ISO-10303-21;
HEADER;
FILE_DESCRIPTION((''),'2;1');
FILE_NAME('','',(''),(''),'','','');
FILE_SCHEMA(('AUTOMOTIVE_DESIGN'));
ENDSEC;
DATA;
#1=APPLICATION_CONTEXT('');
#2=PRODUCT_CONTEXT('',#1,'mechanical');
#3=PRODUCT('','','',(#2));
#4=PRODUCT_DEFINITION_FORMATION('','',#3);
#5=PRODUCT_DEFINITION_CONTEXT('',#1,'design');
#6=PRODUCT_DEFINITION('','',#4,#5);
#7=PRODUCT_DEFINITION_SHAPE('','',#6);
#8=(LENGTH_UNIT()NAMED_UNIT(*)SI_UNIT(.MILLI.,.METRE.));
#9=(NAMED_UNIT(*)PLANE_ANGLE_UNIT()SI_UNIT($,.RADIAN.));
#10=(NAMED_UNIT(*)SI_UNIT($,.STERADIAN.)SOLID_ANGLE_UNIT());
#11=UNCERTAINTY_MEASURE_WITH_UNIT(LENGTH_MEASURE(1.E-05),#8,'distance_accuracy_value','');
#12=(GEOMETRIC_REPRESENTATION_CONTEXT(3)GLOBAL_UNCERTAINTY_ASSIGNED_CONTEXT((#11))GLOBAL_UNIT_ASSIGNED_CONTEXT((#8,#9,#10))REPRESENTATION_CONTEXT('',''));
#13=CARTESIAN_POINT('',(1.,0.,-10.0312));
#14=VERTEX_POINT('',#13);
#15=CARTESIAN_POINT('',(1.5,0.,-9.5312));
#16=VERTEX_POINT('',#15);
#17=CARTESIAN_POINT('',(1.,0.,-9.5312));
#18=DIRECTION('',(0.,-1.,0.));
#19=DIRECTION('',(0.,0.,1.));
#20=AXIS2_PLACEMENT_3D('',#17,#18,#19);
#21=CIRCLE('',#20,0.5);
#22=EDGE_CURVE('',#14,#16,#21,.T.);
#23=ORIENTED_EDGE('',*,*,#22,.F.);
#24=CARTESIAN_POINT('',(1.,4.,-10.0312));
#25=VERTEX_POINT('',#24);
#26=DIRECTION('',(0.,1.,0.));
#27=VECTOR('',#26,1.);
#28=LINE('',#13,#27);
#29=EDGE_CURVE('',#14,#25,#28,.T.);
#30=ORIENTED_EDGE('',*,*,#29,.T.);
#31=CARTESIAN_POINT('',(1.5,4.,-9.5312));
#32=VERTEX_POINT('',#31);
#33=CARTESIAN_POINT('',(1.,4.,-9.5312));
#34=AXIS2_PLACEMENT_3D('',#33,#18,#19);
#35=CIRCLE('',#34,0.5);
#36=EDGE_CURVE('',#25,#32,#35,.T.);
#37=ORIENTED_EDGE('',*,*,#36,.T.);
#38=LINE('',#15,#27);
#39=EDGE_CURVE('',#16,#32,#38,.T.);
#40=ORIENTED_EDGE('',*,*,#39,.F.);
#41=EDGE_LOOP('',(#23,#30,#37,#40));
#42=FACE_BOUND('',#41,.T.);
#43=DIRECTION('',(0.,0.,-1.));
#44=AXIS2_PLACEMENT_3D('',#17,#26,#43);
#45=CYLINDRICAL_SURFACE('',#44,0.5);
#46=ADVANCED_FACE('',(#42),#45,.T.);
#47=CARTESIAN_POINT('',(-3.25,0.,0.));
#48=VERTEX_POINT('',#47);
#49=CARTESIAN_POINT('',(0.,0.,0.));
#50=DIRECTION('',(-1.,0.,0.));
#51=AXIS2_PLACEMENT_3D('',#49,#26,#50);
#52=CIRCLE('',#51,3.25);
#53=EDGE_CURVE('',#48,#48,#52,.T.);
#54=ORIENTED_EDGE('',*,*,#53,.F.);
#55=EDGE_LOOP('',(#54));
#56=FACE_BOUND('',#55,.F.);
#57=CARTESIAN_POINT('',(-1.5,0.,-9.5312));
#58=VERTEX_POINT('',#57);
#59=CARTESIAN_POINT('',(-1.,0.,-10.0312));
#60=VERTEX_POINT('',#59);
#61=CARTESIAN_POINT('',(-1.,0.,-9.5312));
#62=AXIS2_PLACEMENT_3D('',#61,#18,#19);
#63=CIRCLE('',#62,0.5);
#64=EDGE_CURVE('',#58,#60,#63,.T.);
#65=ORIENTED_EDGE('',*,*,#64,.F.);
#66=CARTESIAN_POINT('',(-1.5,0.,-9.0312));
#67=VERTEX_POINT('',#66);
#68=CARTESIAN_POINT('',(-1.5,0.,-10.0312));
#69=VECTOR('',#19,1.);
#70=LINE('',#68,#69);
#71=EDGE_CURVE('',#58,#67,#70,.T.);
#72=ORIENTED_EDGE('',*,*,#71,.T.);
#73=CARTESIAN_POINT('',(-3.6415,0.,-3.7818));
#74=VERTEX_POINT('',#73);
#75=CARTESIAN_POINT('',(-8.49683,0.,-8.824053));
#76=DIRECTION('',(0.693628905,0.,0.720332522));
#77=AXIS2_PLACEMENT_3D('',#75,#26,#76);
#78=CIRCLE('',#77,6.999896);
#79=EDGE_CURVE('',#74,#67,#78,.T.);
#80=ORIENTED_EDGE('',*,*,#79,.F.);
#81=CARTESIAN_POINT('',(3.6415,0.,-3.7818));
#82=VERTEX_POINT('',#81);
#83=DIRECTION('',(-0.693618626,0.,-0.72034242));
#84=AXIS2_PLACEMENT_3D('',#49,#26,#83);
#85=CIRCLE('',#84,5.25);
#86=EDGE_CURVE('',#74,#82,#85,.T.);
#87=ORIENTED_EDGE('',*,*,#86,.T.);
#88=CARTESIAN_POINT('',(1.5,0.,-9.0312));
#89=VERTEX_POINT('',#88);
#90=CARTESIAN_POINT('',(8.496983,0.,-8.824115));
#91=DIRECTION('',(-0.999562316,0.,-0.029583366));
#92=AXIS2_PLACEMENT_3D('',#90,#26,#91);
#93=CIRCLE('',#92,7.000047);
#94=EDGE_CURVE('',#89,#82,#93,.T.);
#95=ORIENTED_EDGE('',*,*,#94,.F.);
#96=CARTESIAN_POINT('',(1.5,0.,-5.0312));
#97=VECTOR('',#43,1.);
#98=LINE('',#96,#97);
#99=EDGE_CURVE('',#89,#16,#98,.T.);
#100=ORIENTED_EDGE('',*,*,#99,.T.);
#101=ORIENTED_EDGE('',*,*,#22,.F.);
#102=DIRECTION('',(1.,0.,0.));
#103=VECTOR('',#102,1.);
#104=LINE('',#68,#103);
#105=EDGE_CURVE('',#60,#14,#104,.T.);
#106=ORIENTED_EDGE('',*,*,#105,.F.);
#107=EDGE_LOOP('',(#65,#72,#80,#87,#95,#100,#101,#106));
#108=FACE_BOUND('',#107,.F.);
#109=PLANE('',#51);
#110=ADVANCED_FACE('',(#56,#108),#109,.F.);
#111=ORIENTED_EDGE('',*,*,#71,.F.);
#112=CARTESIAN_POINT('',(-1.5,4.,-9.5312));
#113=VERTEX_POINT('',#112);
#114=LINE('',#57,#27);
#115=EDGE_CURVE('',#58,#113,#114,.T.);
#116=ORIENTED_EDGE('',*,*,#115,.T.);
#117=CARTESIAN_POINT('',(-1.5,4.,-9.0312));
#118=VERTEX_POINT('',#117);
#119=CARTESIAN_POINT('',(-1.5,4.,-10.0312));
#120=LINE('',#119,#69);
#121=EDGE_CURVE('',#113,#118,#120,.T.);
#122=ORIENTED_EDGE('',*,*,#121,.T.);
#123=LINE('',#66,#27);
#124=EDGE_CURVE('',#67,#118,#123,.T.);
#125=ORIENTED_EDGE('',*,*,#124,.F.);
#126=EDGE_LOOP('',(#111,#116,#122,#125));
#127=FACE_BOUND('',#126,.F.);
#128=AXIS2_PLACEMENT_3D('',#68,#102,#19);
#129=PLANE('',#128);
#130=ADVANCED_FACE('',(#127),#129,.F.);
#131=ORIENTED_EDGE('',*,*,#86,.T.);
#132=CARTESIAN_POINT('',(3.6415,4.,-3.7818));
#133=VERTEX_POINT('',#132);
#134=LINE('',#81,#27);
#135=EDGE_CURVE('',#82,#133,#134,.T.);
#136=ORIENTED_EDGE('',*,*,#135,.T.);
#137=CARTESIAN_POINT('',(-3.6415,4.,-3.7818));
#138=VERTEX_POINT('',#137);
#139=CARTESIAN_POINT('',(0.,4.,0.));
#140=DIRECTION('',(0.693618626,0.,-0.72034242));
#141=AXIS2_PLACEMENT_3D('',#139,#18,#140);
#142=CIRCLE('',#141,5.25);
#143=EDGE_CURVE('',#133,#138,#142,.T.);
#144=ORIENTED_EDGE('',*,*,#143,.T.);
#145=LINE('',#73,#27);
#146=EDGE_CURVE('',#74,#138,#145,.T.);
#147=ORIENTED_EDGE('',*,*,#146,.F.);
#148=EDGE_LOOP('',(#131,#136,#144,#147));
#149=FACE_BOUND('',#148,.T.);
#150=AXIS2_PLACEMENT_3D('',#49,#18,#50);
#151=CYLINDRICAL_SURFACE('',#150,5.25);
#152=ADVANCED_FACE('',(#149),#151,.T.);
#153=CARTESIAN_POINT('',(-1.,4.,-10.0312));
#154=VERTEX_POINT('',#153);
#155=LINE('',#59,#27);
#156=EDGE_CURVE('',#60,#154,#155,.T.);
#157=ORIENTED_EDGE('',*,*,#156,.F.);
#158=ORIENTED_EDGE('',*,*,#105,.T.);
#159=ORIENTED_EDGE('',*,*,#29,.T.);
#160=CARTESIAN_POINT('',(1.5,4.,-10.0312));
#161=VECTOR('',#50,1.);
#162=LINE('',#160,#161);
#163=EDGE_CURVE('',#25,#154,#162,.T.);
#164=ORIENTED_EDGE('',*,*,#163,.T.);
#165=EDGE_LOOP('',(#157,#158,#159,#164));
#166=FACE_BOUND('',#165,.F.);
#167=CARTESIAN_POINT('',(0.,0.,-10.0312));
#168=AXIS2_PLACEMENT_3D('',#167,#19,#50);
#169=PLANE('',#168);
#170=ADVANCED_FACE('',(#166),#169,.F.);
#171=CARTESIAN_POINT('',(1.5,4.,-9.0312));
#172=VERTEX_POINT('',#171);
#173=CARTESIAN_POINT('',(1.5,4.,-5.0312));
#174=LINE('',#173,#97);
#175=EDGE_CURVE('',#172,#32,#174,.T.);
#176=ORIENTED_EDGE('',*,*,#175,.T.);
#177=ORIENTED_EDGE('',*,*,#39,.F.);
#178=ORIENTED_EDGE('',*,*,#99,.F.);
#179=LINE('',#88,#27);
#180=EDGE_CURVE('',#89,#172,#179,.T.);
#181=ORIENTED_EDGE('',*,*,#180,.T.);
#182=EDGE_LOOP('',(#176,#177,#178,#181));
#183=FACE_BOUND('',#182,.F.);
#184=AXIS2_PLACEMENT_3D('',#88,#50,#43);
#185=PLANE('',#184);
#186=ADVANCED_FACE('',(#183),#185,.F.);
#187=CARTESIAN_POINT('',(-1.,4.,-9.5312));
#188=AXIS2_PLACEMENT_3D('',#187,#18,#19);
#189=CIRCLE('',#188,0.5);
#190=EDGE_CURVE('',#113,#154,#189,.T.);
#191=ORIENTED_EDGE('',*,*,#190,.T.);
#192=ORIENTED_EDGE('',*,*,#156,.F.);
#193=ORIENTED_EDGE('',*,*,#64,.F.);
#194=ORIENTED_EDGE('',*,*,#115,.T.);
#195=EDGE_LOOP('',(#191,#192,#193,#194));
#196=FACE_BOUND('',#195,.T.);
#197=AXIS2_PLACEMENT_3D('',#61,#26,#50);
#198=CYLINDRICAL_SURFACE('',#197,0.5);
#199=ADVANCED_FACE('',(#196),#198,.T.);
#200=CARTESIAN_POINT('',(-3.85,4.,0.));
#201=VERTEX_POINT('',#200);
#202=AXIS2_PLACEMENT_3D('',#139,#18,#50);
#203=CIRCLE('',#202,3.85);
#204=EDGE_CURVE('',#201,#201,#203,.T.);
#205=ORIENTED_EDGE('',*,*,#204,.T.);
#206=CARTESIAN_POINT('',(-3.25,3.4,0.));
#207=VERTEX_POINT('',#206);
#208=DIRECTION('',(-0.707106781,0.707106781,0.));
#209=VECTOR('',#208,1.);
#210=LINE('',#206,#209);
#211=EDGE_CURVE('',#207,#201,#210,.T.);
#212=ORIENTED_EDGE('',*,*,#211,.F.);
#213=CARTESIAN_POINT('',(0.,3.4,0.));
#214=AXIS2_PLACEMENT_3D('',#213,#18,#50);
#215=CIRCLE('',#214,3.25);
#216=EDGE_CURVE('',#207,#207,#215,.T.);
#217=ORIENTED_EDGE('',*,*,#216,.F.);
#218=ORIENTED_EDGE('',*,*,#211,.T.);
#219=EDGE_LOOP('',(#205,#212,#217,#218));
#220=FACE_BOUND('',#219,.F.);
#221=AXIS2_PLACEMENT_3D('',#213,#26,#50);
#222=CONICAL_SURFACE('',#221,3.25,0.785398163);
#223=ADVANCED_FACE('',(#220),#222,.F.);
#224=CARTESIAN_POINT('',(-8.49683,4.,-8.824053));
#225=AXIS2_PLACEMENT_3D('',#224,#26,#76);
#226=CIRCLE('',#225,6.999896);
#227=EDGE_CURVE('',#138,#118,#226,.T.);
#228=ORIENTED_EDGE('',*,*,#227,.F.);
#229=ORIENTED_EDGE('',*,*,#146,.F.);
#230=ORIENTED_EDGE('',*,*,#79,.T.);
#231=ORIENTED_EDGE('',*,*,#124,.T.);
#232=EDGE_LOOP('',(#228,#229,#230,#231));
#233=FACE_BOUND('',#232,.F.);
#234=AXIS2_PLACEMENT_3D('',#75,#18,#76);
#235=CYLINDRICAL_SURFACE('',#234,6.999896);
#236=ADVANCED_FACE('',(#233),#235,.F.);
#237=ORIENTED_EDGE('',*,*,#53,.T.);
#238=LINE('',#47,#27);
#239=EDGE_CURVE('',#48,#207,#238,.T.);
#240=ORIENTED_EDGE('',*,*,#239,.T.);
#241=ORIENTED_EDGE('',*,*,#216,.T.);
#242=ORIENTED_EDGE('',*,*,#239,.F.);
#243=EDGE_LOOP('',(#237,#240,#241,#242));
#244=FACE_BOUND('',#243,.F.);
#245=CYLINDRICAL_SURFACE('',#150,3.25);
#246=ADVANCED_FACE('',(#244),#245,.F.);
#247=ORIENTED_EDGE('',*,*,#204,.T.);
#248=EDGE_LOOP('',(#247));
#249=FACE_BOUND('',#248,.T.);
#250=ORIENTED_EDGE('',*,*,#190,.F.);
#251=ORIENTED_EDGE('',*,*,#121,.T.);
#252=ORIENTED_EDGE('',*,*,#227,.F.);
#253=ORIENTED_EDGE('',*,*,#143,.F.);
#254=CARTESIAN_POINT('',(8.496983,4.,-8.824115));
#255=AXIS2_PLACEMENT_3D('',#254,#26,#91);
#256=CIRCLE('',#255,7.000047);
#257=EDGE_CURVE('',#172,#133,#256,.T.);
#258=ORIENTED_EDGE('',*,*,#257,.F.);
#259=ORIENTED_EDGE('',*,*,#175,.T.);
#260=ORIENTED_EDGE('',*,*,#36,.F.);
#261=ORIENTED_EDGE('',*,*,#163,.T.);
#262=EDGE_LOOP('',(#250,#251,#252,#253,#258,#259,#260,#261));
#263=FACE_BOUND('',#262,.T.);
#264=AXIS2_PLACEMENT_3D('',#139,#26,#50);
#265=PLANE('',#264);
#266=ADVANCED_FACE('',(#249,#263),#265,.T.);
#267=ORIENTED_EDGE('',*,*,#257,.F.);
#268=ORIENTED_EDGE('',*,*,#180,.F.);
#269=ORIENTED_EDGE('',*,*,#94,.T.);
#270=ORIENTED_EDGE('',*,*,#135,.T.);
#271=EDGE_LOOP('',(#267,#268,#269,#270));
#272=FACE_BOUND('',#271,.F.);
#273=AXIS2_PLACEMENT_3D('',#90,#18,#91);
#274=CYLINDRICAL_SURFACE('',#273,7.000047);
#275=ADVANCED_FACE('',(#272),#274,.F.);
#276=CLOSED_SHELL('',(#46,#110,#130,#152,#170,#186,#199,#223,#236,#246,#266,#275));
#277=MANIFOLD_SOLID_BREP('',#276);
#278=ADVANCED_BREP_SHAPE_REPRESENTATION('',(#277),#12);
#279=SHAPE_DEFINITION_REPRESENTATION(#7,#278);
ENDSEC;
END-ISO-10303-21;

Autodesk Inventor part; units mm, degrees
ref_plane "YZ Plane" through (0, 0, 0) normal (1, 0, 0) x (0, 1, 0)
ref_plane "XZ Plane" through (0, 0, 0) normal (0, 1, 0) x (-1, 0, 0)
ref_plane "XY Plane" through (0, 0, 0) normal (0, 0, 1) x (1, 0, 0)
sketch "Sketch1" plane through (0, 0, 0) normal (0, 1, 0) x (-1, 0, 0)
  circle A0 centre (0, 0) radius 3.25
  circle A1 centre (0, 0) radius 5.25
  line L0 (1.5, -5.0312) -> (-1.5, -5.0312)
  line L1 (-1.5, -5.0312) -> (-1.5, -10.0312)
  line L2 (-1.5, -10.0312) -> (1.5, -10.0312)
  line L3 (1.5, -10.0312) -> (1.5, -5.0312)
  line L4 (0, 0) -> (0, -10.0312)
  arc A2 (3.6415, -3.7818) -> (1.5, -9.0312) centre (8.4969, -8.8241) ccw
  arc A3 (-1.5, -9.0312) -> (-3.6415, -3.7818) centre (-8.4969, -8.8241) ccw
  dimension "d0" = 6.5
  dimension "d1" = 2
  dimension "d2" = 1.5
  dimension "d3" = 5
  dimension "d4" = 7
  dimension "d5" = 4
  dimension "d6" = 7
extrude "Extrusion1" add sketch "Sketch1" along normal blind 4
sketch "Sketch2" plane through (0, 4, 0) normal (0, 1, 0) x (1, 0, 0)
  arc A0 (-3.6415, 3.7818) -> (-1.5, 9.0312) centre (-8.4969, 8.8241) ccw projected
  arc A1 (-3.6415, 3.7818) -> (3.6415, 3.7818) centre (0, 0) ccw projected
  arc A2 (1.5, 9.0312) -> (3.6415, 3.7818) centre (8.4969, 8.8241) ccw projected
  line L0 (1.5, 9.0312) -> (1.5, 10.0312) projected
  line L1 (1.5, 10.0312) -> (-1.5, 10.0312) projected
  line L2 (-1.5, 10.0312) -> (-1.5, 9.0312) projected
  circle A3 centre (0, 0) radius 3.25 projected
  line L3 (-8.6908, -12.2142) -> (10.4061, -12.2142)
  line L4 (10.4061, -12.2142) -> (10.4061, 17.7463)
  line L5 (10.4061, 17.7463) -> (-8.6908, 17.7463)
  line L6 (-8.6908, 17.7463) -> (-8.6908, -12.2142)
fillet "Fillet2" radius 0.5 2 edges at (1.5, 2, -10.0312) (-1.5, 2, -10.0312)
chamfer "Chamfer1" distance 0.6 angle 45 1 edges at (3.25, 4, 0)
sketch "Sketch3" plane through (1.5, 0, -9.0312) normal (1, 0, 0) x (0, 0, -1)
  line L0 (-5.2494, 4) -> (0, 4) construction
  line L1 (-2, 6) -> (1, 6)
  line L2 (1, 0) -> (1, 4) construction
  line L3 (1, 6) -> (1, 4)
  line L4 (0, 4) -> (1, 4) construction
  line L5 (-6, 4) -> (-2, 6)
  line L6 (-6, 4) -> (1, 4)
  point P0 (-9.0312, 0)
  dimension "d9" = 2
  dimension "d10" = 7
  dimension "d11" = 3
equation "\"d6\" = d4"
properties part number "thumb_bolt_converter"
